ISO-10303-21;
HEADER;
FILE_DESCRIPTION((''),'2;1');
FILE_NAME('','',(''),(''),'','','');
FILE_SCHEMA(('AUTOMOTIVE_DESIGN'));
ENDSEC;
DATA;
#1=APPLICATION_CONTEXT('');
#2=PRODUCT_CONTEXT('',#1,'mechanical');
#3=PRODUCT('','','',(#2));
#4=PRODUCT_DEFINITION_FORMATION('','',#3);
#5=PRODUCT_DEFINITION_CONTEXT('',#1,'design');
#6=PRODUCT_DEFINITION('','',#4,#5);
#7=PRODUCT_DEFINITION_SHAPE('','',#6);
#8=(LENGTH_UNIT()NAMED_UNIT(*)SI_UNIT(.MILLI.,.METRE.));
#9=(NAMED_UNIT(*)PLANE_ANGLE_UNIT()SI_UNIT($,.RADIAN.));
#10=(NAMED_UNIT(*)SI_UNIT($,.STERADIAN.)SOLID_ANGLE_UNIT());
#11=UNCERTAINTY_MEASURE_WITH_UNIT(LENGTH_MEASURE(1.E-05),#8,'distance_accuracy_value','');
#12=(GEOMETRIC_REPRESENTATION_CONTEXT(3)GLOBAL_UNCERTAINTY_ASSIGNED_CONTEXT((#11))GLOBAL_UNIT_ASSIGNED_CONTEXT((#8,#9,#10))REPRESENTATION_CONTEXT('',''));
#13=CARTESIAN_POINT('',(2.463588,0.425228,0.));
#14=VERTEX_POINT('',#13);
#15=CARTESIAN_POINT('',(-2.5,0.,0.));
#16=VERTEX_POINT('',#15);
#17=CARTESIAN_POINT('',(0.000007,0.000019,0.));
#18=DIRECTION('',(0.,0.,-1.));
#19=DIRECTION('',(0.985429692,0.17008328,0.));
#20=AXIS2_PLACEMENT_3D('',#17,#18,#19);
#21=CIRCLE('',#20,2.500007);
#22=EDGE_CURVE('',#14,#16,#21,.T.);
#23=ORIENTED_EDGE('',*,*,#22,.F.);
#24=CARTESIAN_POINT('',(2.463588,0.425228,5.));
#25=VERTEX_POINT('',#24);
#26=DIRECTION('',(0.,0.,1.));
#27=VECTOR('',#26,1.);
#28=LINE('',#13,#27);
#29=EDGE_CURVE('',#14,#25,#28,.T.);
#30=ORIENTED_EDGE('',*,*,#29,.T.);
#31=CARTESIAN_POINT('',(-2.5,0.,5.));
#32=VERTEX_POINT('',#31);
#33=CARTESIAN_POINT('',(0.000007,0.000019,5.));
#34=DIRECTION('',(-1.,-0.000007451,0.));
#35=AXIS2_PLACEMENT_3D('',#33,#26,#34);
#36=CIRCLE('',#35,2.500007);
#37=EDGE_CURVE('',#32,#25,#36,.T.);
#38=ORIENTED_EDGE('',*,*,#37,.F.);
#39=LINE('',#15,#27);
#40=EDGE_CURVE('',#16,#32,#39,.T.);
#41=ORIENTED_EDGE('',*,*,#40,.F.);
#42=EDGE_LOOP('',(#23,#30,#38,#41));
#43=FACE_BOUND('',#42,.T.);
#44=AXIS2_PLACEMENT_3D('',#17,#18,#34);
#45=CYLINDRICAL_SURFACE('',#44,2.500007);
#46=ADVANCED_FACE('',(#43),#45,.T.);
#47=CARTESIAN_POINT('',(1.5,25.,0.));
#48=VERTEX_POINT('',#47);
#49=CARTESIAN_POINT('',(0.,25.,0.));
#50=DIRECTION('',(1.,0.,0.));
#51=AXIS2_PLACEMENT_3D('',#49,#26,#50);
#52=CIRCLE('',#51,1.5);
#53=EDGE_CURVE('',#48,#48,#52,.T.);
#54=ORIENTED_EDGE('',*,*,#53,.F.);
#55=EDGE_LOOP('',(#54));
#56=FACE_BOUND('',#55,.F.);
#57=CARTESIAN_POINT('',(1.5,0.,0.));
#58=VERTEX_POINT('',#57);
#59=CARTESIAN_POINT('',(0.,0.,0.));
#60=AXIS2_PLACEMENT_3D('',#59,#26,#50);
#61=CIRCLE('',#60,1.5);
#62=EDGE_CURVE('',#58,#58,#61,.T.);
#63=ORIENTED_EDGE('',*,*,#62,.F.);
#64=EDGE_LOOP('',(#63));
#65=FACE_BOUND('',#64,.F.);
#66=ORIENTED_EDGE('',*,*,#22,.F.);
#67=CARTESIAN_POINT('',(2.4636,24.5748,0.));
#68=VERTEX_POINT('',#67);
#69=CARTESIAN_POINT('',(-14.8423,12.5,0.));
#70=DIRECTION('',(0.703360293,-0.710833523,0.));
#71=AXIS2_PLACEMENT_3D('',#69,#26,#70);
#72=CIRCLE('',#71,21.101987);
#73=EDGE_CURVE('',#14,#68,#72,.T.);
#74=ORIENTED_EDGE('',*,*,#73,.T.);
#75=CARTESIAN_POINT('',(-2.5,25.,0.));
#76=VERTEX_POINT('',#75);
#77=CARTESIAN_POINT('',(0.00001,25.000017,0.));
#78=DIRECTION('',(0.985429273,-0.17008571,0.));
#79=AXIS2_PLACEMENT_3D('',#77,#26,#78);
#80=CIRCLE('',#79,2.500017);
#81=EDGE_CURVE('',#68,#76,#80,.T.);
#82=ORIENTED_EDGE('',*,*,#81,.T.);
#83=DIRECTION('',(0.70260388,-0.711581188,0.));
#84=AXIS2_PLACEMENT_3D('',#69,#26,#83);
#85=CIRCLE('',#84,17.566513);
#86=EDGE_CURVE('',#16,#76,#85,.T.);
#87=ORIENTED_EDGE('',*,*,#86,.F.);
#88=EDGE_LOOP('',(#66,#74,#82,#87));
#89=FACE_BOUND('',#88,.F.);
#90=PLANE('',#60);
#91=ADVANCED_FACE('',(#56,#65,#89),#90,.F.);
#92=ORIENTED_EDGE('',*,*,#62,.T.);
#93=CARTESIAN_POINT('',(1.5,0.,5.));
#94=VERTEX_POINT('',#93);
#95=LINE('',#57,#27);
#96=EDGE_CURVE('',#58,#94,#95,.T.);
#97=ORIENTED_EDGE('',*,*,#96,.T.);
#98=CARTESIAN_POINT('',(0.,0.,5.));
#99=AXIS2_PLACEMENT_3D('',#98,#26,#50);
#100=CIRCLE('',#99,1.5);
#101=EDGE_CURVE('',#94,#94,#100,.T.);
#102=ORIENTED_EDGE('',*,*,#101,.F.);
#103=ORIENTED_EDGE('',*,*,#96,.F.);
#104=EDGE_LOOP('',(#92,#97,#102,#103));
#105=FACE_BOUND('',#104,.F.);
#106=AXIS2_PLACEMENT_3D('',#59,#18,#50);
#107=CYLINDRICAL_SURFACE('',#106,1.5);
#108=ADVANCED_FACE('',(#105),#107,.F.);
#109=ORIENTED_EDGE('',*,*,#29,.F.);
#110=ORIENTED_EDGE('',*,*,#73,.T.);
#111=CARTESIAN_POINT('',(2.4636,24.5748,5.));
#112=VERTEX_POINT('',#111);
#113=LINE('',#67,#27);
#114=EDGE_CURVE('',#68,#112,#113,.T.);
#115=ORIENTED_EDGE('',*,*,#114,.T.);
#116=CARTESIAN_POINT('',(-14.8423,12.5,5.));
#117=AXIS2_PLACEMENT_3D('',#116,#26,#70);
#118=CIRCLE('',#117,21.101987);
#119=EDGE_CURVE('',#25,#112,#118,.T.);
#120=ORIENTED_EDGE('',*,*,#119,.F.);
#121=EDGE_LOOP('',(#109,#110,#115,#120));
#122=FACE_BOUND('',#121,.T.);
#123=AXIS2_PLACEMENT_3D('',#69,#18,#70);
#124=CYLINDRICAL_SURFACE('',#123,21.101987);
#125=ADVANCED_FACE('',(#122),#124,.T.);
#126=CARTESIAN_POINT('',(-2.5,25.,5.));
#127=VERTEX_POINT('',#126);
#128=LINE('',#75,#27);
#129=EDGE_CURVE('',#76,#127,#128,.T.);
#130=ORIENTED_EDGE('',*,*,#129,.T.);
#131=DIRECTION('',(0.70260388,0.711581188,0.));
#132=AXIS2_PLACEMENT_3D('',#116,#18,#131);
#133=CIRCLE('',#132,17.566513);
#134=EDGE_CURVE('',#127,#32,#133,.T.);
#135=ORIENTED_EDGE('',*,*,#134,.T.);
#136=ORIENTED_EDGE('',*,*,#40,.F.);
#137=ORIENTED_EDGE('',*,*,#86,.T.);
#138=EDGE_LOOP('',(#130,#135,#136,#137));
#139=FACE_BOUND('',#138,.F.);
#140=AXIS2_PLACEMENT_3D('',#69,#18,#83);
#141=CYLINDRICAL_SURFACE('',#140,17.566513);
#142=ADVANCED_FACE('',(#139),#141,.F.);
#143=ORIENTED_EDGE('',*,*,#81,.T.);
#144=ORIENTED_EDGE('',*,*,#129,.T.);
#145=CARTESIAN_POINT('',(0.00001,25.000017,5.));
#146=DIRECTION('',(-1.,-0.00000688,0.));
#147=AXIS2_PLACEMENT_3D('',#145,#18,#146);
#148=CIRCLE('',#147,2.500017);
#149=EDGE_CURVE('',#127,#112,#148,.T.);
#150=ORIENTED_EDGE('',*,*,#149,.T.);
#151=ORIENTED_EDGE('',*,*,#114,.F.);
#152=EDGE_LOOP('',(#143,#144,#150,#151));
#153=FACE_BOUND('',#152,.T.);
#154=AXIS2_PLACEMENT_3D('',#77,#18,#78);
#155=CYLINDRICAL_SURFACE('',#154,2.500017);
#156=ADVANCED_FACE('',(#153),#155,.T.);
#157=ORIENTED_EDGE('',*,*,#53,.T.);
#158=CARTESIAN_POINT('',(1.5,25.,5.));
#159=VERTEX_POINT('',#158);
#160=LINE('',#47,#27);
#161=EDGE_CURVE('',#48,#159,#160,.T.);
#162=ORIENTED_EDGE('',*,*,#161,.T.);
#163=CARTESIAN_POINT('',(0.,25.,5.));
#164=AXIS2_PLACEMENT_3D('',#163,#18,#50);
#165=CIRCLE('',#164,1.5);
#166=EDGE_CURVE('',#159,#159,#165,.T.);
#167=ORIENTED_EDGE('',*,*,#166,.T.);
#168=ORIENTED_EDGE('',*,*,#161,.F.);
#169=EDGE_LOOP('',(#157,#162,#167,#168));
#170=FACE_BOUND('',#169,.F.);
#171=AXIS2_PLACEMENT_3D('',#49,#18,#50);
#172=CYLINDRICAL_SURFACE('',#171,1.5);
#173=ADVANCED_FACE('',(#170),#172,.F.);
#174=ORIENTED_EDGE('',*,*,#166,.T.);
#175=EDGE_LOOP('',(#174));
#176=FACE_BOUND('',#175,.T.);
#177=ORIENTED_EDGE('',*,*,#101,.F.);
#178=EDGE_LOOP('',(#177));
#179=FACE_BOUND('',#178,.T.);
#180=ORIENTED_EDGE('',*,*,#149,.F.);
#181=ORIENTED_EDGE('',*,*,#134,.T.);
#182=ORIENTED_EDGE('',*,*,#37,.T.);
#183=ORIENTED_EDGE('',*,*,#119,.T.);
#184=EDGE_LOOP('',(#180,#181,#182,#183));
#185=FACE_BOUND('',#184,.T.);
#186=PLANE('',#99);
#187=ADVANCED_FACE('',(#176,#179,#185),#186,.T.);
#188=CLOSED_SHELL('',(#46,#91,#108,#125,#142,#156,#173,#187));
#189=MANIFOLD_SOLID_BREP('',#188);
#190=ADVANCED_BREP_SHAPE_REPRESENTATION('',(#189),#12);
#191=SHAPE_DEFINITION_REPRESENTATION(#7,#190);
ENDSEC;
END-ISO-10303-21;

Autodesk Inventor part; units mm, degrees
ref_plane "YZ Plane" through (0, 0, 0) normal (1, 0, 0) x (0, 1, 0)
ref_plane "XZ Plane" through (0, 0, 0) normal (0, 1, 0) x (-1, 0, 0)
ref_plane "XY Plane" through (0, 0, 0) normal (0, 0, 1) x (1, 0, 0)
sketch "Sketch1" plane through (0, 0, 0) normal (0, 0, 1) x (1, 0, 0)
  circle A0 centre (0, 0) radius 1.5
  circle A1 centre (0, 25) radius 1.5
  arc A2 (2.4636, 24.5748) -> (0, 22.5) centre (0, 25) ccw
  arc A3 (-2.5, 0) -> (-0.4252, 2.4636) centre (0, 0) ccw
  line L0 (0, 16.5) -> (0, 25)
  arc A4 (0, -2.5) -> (0, 27.5) centre (-14.8423, 12.5) ccw
  arc A5 (-2.5, 0) -> (-2.5, 25) centre (-14.8423, 12.5) ccw
  dimension "d0" = 3
  dimension "d3" = 25
  dimension "d4" = 3
  dimension "d5" = 5
  dimension "d6" = 5
extrude "Extrusion1" add sketch "Sketch1" along normal blind 5 contours A4 A2 | A4 A3 A5 L0 A2 | A4 A3 A5 | A3 A4 | A2 L0 A5
properties part number "bar_mid"
